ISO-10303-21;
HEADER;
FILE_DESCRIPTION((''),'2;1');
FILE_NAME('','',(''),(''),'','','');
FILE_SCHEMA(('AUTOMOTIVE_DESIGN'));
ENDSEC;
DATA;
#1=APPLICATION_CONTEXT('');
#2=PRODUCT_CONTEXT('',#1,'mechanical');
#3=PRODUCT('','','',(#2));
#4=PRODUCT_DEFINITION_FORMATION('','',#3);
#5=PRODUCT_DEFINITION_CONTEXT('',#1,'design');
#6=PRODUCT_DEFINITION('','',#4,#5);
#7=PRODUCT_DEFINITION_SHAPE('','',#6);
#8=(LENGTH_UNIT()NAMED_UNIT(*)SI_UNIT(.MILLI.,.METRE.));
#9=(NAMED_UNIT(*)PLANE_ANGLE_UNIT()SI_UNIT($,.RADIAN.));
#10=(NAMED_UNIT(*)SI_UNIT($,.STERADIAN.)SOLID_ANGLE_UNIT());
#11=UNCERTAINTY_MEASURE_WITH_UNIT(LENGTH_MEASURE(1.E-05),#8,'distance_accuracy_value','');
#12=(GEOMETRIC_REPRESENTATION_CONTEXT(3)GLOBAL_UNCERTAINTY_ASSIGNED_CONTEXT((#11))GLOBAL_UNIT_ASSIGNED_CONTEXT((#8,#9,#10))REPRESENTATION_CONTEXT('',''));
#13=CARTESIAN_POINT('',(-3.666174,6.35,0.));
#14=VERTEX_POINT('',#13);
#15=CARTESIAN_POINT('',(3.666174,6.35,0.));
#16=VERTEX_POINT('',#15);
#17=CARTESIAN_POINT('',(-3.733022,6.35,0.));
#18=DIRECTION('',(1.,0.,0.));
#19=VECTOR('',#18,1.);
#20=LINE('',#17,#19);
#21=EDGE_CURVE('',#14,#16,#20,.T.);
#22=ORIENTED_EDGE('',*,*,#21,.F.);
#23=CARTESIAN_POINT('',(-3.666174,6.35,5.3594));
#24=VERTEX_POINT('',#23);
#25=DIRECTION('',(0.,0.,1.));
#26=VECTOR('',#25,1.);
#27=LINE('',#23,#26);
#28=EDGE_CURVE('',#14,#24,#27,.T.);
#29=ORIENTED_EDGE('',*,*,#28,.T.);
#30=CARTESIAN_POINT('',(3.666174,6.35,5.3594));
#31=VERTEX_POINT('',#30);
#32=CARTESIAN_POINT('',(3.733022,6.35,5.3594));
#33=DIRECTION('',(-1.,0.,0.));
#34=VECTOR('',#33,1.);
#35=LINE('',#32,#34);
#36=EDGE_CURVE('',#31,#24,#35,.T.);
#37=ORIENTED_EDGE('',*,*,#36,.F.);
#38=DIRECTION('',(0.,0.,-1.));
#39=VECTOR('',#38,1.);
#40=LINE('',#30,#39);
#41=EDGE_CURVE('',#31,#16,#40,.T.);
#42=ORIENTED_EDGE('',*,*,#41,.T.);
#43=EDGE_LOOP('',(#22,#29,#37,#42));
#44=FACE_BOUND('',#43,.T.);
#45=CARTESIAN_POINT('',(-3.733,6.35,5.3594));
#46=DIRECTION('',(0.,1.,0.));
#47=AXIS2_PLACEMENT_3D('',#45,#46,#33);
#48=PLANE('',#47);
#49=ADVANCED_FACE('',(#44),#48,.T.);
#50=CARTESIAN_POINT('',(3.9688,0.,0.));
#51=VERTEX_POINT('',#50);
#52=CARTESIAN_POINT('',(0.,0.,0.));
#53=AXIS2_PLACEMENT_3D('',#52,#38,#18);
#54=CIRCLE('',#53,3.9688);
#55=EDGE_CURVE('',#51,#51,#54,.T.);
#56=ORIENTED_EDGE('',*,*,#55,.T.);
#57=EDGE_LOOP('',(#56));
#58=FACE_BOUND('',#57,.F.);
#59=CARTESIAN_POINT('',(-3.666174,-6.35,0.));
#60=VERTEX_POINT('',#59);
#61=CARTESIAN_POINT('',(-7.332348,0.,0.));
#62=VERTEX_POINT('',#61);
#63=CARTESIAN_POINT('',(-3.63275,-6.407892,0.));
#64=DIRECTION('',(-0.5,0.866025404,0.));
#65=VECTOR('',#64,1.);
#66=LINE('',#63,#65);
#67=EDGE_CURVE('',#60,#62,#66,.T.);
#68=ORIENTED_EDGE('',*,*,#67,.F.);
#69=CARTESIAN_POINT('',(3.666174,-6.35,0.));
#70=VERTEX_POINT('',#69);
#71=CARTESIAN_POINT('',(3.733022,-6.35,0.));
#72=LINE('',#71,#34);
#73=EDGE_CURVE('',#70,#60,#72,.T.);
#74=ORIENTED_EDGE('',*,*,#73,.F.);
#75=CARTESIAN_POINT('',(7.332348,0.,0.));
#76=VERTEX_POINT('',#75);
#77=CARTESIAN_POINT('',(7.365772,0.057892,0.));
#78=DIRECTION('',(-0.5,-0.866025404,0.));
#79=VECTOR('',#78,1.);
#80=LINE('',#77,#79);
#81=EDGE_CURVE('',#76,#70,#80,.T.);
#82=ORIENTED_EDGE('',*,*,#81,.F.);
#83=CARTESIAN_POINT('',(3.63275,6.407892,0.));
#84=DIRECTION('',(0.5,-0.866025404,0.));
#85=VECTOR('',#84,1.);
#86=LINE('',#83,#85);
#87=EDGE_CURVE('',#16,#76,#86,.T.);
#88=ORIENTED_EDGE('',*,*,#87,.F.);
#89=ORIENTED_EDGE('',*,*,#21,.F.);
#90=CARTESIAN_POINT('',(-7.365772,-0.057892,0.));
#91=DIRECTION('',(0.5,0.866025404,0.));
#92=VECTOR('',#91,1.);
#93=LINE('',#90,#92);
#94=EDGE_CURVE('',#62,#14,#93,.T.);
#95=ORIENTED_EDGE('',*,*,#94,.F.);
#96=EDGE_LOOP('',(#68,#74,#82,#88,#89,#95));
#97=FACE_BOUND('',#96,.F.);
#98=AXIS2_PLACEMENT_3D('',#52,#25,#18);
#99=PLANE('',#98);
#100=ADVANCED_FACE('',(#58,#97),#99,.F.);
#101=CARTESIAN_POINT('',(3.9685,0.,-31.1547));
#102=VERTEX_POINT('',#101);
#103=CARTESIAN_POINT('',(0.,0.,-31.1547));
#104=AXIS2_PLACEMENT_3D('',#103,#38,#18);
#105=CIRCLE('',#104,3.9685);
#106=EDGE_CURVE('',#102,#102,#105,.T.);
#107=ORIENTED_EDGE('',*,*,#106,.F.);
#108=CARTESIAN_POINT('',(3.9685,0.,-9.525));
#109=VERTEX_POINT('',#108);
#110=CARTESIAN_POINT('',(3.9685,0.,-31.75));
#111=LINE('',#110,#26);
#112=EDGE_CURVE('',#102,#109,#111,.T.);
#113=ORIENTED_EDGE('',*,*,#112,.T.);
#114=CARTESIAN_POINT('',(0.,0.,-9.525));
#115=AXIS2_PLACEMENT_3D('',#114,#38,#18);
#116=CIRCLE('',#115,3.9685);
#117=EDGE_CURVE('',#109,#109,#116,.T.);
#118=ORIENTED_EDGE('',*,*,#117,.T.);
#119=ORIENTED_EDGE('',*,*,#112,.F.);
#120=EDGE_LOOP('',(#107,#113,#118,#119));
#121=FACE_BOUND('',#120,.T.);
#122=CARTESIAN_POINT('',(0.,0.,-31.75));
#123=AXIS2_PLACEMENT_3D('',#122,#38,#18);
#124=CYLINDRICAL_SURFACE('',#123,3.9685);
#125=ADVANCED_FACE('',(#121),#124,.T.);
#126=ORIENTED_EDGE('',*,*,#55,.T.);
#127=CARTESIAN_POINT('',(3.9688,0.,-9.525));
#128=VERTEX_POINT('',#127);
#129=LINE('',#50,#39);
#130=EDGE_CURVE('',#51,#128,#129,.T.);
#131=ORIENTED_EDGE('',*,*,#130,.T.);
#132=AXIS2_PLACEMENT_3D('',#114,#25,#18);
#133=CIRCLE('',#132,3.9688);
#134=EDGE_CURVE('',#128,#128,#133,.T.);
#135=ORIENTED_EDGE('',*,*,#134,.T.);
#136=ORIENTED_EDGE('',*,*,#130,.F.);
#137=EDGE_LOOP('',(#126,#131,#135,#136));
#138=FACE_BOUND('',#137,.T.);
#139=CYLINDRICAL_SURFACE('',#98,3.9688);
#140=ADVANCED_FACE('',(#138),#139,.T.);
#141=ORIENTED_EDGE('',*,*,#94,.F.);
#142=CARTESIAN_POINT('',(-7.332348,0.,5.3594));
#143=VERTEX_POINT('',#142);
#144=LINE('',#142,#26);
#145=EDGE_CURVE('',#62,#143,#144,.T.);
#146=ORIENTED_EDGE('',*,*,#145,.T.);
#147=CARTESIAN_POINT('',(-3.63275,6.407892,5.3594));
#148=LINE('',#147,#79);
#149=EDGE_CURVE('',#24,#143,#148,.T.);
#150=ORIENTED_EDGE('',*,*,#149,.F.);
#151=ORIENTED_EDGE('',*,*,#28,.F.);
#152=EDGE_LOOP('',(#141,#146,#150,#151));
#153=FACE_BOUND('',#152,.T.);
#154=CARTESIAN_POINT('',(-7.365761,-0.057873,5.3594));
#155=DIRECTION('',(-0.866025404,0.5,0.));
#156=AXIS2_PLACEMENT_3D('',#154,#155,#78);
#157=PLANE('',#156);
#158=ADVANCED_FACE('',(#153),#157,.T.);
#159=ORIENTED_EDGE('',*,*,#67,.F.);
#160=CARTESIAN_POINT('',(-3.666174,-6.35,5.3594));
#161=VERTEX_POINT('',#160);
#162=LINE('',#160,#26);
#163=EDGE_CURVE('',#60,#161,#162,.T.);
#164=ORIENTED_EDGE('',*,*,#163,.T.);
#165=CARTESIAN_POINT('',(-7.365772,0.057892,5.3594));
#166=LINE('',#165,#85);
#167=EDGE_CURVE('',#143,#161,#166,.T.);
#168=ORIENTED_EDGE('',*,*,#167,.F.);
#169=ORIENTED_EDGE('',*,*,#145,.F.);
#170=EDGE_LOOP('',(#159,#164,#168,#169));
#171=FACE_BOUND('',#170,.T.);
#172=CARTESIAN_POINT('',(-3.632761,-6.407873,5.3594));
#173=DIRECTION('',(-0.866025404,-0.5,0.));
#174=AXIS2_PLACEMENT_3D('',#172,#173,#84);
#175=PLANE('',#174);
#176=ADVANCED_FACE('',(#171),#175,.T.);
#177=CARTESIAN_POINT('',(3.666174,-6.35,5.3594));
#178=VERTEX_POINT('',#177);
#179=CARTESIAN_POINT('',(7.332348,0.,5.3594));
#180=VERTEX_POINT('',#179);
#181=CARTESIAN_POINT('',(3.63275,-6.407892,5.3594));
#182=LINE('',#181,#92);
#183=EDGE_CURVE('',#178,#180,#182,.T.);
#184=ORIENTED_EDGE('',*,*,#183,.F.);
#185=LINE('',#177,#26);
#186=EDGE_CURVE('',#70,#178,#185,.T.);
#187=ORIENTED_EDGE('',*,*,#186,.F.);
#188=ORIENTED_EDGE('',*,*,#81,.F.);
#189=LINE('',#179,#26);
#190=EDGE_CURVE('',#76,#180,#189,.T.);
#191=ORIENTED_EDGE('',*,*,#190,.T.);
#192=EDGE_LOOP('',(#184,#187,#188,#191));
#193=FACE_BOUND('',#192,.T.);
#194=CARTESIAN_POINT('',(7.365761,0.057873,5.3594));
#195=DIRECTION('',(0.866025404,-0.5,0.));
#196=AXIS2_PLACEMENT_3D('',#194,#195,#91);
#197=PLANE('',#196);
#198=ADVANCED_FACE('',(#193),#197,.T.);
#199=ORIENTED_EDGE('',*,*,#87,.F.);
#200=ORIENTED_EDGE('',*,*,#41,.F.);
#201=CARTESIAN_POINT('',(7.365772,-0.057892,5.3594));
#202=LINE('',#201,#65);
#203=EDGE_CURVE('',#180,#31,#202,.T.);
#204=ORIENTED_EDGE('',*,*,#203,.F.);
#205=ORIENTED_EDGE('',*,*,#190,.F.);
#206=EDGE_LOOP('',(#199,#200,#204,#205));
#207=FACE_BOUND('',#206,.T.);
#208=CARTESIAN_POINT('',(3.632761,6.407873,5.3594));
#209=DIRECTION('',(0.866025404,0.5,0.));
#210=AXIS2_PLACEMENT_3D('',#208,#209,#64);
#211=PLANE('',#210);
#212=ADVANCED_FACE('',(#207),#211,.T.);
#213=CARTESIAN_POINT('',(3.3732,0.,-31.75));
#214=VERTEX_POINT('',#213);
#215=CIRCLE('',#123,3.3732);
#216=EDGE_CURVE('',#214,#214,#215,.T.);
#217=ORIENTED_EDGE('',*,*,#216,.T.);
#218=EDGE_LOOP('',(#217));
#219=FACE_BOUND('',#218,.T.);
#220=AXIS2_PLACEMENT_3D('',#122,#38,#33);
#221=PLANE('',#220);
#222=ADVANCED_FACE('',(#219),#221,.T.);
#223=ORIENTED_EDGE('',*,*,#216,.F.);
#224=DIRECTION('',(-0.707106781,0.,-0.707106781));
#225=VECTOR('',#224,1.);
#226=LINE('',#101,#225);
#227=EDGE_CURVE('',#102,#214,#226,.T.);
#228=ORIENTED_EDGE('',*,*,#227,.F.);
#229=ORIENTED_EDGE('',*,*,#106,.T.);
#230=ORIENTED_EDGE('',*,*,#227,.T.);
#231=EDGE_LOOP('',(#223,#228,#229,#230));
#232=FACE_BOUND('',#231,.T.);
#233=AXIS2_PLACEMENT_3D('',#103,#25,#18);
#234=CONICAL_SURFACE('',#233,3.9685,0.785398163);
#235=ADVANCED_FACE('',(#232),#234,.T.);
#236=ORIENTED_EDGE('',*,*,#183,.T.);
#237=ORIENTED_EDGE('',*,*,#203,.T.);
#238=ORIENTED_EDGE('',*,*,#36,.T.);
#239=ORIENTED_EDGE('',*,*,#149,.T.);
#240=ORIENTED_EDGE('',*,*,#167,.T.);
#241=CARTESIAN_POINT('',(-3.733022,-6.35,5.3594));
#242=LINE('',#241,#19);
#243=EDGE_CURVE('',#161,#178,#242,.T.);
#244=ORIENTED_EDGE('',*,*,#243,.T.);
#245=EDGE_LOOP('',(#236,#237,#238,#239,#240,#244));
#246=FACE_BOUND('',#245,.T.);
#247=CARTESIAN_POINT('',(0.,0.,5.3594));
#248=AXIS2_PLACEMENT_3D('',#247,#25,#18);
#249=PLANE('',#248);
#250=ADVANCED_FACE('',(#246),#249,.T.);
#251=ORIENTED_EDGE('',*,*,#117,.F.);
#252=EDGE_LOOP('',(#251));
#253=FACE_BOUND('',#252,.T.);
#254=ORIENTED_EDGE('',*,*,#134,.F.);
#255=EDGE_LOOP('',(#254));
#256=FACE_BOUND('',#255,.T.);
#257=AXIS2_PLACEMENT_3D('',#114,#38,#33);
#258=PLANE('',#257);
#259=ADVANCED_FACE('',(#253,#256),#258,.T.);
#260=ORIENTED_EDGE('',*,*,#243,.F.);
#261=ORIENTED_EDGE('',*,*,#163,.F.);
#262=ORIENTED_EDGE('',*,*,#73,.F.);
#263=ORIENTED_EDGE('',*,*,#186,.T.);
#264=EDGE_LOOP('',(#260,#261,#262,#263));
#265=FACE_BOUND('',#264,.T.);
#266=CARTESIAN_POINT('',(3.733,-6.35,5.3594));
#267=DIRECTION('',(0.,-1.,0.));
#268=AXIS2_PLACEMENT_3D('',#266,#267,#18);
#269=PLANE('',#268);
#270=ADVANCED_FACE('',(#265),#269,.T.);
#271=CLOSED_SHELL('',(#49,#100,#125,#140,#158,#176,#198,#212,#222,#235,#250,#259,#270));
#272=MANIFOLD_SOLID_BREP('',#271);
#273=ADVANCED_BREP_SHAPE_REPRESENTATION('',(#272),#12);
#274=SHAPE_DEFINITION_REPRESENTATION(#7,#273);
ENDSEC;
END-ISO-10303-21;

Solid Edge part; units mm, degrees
sketch "Sketch1" plane through (0, 0, 0) normal (0, 0, 1) x (1, 0, 0)
  circle A0 centre (0, 0) radius 7.366
  dimension "D1" = 14.732
extrude "Protrusion1" add sketch "Sketch1" along normal blind 5.3594
sketch "Sketch2" plane through (0, 0, 0) normal (0, 0, -1) x (1, 0, 0)
  circle A0 centre (0, 0) radius 3.9688
extrude "Protrusion2" add sketch "Sketch2" along normal blind 31.75
sketch "Sketch3" plane through (0, 0, -31.75) normal (0, 0, -1) x (1, 0, 0)
  circle A0 centre (0, 0) radius 3.9685
extrude "Cutout1" cut sketch "Sketch3" against normal blind 22.225 flip side to cut
chamfer "Chamfer_1" distance 0.5953 angle 45 1 edges at (-3.9685, 0, -31.75)
sketch "Sketch4" plane through (0, 0, 5.3594) normal (0, 0, 1) x (1, 0, 0)
  line L0 (-3.733, 6.35) -> (3.733, 6.35)
  dimension "D1" = 12.7
extrude "Cutout2" cut sketch "Sketch4" against normal up to next material side at (0, 6.4, 5.3594)
pattern_circular "Pattern1" count 6 over 360 about axis through (0, 0, 5.3594) along (0, 0, 1) of "Cutout2"
properties part number "24102219"
